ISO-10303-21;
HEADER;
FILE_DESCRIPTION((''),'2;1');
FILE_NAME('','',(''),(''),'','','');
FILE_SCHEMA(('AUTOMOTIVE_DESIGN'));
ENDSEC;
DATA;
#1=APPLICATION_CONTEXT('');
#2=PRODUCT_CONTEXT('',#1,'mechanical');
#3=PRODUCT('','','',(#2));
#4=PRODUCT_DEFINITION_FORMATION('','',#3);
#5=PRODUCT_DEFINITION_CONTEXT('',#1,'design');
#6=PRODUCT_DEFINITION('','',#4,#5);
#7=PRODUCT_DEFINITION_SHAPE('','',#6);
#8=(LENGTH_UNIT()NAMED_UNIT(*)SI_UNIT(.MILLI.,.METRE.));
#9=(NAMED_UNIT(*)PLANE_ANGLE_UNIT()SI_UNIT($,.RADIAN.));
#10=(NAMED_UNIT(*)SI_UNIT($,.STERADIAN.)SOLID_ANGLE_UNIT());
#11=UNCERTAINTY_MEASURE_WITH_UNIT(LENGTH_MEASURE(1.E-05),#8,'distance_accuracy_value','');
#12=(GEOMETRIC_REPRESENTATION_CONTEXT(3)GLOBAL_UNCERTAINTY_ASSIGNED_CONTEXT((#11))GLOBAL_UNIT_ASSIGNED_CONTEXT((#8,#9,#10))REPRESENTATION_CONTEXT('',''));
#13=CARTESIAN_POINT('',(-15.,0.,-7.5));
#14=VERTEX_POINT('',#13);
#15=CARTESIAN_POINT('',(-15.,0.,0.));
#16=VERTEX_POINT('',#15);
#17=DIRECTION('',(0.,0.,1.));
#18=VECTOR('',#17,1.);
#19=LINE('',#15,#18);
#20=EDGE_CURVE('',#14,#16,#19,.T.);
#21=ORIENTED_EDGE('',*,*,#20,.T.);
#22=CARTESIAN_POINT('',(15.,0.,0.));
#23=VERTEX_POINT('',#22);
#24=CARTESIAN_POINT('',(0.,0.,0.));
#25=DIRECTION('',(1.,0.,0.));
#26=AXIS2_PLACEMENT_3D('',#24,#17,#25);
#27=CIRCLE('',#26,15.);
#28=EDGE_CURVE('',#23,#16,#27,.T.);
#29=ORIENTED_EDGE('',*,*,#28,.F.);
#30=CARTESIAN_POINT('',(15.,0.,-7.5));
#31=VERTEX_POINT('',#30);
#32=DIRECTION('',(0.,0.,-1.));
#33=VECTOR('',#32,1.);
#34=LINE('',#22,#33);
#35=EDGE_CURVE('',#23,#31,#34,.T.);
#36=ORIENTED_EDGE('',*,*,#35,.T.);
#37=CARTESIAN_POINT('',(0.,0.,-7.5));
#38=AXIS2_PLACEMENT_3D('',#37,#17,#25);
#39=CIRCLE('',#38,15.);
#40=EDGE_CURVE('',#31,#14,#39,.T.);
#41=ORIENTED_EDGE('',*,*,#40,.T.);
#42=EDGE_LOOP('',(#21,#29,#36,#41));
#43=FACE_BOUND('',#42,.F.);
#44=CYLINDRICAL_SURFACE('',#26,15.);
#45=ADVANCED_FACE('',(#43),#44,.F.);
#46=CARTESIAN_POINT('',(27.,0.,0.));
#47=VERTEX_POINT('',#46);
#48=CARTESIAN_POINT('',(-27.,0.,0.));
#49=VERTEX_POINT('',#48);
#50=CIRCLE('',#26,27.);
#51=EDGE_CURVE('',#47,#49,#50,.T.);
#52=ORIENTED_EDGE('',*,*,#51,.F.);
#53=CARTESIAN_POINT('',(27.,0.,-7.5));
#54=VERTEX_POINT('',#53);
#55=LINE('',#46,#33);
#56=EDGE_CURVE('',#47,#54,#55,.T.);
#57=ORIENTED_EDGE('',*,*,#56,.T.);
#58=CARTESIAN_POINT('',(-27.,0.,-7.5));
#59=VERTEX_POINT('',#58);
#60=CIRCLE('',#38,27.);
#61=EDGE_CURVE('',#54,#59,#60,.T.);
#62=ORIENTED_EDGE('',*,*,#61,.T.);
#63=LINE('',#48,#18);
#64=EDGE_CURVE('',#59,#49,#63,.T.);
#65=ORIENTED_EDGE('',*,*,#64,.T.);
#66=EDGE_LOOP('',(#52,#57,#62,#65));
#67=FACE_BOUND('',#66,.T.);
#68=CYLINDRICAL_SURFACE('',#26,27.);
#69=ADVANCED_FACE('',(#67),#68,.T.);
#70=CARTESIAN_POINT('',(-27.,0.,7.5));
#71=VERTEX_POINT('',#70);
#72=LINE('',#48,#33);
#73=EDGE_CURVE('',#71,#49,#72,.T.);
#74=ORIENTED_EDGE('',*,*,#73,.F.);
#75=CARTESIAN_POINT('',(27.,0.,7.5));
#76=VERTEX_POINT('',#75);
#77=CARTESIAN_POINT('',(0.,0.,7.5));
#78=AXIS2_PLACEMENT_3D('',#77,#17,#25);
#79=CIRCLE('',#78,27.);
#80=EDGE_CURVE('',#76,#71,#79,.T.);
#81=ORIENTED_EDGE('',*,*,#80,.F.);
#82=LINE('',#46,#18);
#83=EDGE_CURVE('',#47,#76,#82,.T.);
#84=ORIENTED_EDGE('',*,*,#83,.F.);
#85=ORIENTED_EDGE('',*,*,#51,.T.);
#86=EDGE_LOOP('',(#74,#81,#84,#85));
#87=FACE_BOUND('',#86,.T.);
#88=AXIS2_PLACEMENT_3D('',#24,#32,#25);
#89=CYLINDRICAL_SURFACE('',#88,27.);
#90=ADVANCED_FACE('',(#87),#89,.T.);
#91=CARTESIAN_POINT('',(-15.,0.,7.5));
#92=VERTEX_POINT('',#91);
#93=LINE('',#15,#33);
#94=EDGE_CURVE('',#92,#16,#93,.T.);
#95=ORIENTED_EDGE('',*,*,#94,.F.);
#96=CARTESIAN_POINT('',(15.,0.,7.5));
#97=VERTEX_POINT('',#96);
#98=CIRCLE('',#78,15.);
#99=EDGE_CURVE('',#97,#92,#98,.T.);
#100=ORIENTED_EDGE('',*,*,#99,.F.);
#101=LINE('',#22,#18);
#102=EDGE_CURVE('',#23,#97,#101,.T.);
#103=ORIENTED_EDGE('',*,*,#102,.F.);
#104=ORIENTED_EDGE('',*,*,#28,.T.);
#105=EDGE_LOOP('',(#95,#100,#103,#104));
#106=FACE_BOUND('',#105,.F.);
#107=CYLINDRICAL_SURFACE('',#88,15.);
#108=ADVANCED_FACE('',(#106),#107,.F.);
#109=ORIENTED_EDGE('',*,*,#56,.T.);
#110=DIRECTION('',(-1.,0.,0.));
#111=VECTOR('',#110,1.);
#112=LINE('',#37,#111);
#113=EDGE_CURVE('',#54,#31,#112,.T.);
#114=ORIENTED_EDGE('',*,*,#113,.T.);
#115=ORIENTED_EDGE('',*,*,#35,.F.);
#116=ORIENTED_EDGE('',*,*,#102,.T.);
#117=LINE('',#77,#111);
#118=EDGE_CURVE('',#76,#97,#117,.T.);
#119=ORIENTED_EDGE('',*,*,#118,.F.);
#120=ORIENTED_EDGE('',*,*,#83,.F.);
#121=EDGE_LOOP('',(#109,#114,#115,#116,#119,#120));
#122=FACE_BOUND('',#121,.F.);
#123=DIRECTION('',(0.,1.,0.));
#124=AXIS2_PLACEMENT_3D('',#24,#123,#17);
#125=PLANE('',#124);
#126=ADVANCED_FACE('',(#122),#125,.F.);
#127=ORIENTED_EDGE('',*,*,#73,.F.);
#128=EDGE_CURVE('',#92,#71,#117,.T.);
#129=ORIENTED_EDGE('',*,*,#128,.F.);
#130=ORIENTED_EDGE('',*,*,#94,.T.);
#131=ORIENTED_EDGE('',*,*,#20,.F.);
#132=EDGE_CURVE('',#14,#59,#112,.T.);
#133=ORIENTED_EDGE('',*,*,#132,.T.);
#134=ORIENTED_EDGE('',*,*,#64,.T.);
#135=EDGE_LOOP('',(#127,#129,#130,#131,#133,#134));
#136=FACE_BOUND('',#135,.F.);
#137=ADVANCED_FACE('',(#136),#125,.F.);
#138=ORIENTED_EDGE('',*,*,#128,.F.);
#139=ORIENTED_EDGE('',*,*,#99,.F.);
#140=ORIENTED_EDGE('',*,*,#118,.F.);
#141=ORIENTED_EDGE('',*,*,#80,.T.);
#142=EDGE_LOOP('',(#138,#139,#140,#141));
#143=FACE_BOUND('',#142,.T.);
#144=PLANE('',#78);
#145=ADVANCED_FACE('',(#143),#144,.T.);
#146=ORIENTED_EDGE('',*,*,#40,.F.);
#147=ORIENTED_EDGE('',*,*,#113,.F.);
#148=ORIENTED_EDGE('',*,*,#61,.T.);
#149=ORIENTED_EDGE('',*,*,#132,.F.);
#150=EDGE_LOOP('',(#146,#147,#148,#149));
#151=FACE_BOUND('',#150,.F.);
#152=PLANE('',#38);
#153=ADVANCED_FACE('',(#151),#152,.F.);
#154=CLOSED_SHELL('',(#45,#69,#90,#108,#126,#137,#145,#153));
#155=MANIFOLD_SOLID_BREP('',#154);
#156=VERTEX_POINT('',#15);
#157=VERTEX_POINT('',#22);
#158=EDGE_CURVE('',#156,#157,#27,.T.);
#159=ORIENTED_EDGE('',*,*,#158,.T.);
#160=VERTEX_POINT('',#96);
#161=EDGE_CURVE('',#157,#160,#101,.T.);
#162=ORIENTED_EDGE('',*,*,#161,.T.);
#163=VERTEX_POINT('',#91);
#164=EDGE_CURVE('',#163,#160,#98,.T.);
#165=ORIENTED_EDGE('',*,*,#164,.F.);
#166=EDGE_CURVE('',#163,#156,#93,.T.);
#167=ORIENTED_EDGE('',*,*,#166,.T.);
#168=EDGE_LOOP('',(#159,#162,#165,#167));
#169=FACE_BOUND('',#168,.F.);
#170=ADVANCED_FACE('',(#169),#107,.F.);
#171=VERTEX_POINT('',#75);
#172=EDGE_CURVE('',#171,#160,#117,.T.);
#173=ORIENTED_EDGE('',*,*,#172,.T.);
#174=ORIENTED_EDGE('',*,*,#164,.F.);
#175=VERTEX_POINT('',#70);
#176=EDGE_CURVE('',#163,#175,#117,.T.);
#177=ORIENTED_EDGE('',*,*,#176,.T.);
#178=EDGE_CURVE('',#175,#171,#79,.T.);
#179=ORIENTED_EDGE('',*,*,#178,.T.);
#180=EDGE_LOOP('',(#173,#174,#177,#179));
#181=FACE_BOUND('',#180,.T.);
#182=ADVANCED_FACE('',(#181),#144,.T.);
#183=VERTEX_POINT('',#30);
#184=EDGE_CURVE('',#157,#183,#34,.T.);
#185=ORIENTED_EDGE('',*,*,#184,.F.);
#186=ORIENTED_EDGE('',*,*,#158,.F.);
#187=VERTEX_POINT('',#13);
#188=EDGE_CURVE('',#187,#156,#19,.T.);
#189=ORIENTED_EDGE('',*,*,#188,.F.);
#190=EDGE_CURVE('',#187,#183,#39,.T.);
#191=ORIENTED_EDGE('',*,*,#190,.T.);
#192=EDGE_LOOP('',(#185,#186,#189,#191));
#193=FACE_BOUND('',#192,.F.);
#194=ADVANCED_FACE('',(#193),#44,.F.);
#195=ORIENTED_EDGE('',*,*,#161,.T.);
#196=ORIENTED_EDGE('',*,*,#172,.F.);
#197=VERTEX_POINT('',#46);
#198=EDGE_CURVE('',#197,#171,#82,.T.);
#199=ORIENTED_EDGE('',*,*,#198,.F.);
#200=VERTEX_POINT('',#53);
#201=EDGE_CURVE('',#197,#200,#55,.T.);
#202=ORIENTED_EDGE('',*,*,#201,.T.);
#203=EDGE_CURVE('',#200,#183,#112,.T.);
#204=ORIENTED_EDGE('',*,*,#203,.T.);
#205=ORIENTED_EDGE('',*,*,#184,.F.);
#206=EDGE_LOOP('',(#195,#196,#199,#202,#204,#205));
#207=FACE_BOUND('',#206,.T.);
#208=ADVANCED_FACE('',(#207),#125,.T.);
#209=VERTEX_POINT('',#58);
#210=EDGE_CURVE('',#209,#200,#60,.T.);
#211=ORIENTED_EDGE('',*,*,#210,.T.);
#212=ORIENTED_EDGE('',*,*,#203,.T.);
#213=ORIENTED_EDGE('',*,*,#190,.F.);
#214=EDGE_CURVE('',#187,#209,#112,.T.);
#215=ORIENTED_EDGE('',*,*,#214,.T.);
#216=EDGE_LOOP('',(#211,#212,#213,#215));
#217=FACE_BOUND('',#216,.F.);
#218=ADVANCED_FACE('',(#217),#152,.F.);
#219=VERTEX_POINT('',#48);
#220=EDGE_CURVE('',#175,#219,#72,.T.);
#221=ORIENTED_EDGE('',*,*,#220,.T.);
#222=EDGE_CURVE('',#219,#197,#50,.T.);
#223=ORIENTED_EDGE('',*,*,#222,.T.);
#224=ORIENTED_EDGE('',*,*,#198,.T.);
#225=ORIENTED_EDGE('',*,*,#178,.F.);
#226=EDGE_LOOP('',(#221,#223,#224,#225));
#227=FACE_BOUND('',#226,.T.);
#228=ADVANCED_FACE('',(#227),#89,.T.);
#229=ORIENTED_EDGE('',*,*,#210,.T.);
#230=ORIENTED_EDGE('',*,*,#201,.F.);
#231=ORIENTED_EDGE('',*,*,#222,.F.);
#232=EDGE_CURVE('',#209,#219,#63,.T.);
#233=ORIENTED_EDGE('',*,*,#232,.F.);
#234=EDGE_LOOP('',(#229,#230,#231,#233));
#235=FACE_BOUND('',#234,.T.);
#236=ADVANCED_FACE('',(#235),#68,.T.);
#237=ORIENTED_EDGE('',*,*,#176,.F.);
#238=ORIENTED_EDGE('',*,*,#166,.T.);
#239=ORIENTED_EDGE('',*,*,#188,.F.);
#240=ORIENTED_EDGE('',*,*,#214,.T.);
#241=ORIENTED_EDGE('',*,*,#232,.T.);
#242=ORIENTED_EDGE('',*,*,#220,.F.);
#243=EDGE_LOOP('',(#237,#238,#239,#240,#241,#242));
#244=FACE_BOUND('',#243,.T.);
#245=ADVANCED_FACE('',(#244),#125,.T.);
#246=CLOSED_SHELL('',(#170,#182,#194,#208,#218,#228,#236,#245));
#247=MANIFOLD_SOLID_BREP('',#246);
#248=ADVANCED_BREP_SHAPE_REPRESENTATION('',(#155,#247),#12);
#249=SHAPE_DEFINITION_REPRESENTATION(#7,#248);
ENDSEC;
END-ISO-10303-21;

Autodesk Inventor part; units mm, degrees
ref_plane "YZ Plane" through (0, 0, 0) normal (1, 0, 0) x (0, 1, 0)
ref_plane "XY Plane" through (0, 0, 0) normal (0, 0, 1) x (1, 0, 0)
sketch "Two Piece Clamp Profile" plane through (0, 0, 0) normal (0, 0, 1) x (1, 0, 0)
  circle A0 centre (0, 0) radius 15
  circle A1 centre (0, 0) radius 27
  dimension "d0" = 54
  dimension "d1" = 30
extrude "Make Part" add sketch "Two Piece Clamp Profile" along normal mid plane 15
split body "Two Parts" result two bodies by plane through (0, 0, 0) normal (0, 1, 0) first body at (-22.7385, 2.1538, 7)
ref_plane "Tangent Plane" through (0, 27, 0) normal (0, 1, 0) x (-1, 0, 0)
sketch "Locate Hole Centres" plane through (0, 27, 0) normal (0, 1, 0) x (-1, 0, 0)
  line L0 (-15, -7.5) -> (-27, -7.5) projected
  line L1 (-15, 7.5) -> (-15, -7.5) projected
  line L2 (-27, 7.5) -> (-15, 7.5) projected
  line L3 (-27, -7.5) -> (-27, 7.5) projected
  line L4 (27, -7.5) -> (15, -7.5) projected
  line L5 (27, 7.5) -> (27, -7.5) projected
  line L6 (15, 7.5) -> (27, 7.5) projected
  line L7 (15, -7.5) -> (15, 7.5) projected
  line L8 (-21, 7.5) -> (-21, -7.5) construction
  line L9 (21, 7.5) -> (21, -7.5) construction
  point P0 (0, 0)
  point P1 (-21, 0)
  point P2 (21, 0)
equation "\"d0\" = Huco30_54_15_TwoPieceClampOuterDiameter"
equation "\"d1\" = Huco30_54_15_TwoPieceClampBore"
equation "\"d2\" = Huco30_54_15_TwoPieceClampWidth"
equation "\"Huco30_54_15_TwoPieceClampWidth\" = 15"
equation "\"Huco30_54_15_TwoPieceClampBore\" = 30"
equation "\"Huco30_54_15_TwoPieceClampOuterDiameter\" = 54"
properties part number "Two Piece Clamp Huco Stock No 046201030 Dim 30-54-15" material "Steel"
